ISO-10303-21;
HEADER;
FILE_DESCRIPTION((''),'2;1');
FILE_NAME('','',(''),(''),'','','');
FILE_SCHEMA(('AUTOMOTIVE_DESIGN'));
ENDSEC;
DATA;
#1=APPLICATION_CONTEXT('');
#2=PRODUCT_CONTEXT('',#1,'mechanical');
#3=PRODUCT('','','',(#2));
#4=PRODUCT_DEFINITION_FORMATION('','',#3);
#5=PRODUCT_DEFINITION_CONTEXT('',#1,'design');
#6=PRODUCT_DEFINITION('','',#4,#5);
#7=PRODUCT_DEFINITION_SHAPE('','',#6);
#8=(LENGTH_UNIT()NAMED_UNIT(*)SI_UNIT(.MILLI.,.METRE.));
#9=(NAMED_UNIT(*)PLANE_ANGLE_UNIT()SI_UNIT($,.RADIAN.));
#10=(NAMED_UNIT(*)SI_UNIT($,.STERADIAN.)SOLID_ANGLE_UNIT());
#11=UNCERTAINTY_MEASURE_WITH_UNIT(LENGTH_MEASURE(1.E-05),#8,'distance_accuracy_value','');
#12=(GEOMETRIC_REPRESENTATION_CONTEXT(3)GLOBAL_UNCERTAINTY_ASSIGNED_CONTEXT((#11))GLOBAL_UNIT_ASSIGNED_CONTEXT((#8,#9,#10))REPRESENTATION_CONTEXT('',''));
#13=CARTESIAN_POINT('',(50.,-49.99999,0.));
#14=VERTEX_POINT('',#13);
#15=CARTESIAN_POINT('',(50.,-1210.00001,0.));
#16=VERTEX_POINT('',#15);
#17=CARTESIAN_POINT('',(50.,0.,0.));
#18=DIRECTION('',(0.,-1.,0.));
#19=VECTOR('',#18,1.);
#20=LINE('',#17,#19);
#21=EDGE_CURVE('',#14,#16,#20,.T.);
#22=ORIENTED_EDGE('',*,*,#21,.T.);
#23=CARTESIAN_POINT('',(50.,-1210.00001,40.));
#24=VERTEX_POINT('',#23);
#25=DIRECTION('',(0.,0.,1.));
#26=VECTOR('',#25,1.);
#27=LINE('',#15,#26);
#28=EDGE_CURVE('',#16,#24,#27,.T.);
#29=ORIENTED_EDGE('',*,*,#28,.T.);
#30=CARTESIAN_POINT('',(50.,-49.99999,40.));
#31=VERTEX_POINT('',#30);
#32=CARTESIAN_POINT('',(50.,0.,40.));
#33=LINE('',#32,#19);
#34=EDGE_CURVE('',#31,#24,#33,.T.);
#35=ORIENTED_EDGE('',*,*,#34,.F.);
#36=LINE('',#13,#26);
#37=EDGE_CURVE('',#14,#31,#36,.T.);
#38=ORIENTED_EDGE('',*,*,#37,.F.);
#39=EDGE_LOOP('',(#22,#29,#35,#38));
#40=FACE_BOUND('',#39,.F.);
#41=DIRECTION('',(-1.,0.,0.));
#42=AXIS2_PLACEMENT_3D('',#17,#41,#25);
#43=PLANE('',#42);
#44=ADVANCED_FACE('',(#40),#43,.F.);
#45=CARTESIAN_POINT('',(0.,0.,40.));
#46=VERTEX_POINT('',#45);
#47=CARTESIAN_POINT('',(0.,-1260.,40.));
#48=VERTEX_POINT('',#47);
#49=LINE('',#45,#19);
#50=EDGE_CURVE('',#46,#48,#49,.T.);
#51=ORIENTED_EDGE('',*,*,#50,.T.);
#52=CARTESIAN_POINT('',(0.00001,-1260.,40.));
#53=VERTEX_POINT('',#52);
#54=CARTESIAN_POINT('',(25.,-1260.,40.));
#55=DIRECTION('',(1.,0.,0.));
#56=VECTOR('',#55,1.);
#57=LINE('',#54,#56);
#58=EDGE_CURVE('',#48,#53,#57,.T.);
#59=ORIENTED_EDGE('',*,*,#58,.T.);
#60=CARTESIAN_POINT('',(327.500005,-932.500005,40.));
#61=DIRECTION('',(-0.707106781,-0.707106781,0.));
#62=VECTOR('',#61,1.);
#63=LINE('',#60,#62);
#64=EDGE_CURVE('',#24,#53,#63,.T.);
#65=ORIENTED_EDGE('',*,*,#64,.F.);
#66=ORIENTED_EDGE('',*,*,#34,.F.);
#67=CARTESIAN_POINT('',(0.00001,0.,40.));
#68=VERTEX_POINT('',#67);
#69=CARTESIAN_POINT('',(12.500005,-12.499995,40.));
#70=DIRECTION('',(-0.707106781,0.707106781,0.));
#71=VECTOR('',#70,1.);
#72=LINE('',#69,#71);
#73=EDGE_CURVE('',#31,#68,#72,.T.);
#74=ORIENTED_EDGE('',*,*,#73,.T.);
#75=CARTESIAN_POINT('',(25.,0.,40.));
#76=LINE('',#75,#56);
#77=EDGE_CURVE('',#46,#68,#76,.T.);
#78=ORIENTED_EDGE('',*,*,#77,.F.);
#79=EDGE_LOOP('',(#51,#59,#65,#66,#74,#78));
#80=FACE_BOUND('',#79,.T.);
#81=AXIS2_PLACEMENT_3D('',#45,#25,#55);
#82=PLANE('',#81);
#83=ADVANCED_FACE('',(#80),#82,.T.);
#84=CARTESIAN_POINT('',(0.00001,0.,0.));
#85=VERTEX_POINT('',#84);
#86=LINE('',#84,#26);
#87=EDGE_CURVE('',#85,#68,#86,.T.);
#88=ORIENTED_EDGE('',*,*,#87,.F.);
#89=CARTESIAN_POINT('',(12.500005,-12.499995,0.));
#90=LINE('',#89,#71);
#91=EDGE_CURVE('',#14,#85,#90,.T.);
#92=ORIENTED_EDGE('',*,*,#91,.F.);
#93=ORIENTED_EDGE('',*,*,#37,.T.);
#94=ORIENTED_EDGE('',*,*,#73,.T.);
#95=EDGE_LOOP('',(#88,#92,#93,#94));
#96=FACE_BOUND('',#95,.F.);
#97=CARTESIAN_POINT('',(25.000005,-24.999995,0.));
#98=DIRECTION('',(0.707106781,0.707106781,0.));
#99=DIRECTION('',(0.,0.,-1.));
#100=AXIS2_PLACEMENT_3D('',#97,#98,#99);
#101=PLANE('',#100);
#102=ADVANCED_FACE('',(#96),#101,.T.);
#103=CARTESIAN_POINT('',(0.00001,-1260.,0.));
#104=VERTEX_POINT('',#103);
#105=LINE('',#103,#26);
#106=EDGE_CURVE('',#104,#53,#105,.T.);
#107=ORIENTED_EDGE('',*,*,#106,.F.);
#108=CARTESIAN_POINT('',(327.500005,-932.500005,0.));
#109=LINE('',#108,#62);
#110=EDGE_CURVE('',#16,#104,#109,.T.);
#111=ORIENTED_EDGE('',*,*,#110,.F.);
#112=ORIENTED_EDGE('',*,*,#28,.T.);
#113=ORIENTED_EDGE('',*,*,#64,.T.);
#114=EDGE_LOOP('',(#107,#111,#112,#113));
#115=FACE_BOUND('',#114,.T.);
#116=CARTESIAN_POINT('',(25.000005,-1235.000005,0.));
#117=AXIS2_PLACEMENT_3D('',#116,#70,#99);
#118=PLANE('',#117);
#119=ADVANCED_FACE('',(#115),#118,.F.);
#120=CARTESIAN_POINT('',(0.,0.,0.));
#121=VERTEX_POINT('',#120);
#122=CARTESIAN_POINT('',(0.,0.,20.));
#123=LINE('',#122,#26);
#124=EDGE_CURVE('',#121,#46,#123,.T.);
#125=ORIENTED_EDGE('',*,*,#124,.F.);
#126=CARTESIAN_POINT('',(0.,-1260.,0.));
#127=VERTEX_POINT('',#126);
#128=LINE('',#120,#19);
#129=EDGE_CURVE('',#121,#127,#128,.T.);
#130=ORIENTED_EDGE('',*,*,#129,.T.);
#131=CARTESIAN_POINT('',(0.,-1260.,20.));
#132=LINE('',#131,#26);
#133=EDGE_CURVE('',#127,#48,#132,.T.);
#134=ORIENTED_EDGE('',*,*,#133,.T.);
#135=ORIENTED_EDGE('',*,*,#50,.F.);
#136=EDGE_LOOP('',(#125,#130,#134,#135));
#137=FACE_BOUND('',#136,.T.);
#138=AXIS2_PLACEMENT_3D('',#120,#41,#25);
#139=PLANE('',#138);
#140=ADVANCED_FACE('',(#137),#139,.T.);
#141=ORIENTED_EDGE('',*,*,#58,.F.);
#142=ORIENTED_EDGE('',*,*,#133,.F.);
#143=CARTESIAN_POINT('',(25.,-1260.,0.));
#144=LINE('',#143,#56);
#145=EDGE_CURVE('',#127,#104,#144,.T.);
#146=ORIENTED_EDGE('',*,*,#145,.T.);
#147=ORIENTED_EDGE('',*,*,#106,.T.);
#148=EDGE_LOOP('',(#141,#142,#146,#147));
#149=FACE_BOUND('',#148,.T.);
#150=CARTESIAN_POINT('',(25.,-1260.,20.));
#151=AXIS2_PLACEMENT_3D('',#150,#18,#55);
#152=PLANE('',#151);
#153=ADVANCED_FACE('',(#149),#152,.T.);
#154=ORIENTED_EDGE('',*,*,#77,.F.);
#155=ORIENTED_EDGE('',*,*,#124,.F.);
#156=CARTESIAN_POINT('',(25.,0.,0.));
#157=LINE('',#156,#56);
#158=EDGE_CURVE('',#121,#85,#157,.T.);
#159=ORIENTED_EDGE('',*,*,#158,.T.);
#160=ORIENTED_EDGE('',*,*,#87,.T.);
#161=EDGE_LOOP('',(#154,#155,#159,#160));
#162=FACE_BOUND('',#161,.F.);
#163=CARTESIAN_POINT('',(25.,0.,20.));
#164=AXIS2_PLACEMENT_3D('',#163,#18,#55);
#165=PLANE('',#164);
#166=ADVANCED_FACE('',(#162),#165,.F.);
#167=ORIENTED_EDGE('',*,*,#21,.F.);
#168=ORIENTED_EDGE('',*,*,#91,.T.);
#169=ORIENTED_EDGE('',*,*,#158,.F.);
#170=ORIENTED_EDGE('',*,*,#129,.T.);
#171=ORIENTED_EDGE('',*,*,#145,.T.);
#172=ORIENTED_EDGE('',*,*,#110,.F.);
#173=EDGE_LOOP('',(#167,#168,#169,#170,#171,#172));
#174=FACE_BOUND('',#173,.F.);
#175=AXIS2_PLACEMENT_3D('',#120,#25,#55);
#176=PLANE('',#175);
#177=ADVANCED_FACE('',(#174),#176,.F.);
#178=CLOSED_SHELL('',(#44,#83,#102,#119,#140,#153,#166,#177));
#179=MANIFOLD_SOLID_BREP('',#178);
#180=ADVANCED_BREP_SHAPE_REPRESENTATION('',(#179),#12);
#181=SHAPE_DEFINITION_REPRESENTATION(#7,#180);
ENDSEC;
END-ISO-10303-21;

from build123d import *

# Parameters (mm, degrees)
F0_W     = 50
F0_H     = 40
F1_DEPTH = 1260
F2_SIZE2 = 49.99999
F2_SIZE  = 49.99999


# Not quite as in the source:
# - a fillet or chamfer is up to 0.001 mm smaller than in the source, because OpenCascade refuses the exact size


with BuildPart() as f1:
    # F0 (on Front) → F1 (new body)
    with BuildSketch(Plane.XZ):
        with Locations((25, 20)):
            Rectangle(F0_W, F0_H)
    extrude(amount=F1_DEPTH)

    # F2 (size 50 and 50 in the source; OpenCascade refuses exactly that, so slightly less here)
    f2_edges = [f1.edges().sort_by_distance(p)[0] for p in [
        (50, 0, 20),
        (50, -1260, 20),
    ]]
    chamfer(f2_edges, length=F2_SIZE, length2=F2_SIZE2)


solid = f1.part
